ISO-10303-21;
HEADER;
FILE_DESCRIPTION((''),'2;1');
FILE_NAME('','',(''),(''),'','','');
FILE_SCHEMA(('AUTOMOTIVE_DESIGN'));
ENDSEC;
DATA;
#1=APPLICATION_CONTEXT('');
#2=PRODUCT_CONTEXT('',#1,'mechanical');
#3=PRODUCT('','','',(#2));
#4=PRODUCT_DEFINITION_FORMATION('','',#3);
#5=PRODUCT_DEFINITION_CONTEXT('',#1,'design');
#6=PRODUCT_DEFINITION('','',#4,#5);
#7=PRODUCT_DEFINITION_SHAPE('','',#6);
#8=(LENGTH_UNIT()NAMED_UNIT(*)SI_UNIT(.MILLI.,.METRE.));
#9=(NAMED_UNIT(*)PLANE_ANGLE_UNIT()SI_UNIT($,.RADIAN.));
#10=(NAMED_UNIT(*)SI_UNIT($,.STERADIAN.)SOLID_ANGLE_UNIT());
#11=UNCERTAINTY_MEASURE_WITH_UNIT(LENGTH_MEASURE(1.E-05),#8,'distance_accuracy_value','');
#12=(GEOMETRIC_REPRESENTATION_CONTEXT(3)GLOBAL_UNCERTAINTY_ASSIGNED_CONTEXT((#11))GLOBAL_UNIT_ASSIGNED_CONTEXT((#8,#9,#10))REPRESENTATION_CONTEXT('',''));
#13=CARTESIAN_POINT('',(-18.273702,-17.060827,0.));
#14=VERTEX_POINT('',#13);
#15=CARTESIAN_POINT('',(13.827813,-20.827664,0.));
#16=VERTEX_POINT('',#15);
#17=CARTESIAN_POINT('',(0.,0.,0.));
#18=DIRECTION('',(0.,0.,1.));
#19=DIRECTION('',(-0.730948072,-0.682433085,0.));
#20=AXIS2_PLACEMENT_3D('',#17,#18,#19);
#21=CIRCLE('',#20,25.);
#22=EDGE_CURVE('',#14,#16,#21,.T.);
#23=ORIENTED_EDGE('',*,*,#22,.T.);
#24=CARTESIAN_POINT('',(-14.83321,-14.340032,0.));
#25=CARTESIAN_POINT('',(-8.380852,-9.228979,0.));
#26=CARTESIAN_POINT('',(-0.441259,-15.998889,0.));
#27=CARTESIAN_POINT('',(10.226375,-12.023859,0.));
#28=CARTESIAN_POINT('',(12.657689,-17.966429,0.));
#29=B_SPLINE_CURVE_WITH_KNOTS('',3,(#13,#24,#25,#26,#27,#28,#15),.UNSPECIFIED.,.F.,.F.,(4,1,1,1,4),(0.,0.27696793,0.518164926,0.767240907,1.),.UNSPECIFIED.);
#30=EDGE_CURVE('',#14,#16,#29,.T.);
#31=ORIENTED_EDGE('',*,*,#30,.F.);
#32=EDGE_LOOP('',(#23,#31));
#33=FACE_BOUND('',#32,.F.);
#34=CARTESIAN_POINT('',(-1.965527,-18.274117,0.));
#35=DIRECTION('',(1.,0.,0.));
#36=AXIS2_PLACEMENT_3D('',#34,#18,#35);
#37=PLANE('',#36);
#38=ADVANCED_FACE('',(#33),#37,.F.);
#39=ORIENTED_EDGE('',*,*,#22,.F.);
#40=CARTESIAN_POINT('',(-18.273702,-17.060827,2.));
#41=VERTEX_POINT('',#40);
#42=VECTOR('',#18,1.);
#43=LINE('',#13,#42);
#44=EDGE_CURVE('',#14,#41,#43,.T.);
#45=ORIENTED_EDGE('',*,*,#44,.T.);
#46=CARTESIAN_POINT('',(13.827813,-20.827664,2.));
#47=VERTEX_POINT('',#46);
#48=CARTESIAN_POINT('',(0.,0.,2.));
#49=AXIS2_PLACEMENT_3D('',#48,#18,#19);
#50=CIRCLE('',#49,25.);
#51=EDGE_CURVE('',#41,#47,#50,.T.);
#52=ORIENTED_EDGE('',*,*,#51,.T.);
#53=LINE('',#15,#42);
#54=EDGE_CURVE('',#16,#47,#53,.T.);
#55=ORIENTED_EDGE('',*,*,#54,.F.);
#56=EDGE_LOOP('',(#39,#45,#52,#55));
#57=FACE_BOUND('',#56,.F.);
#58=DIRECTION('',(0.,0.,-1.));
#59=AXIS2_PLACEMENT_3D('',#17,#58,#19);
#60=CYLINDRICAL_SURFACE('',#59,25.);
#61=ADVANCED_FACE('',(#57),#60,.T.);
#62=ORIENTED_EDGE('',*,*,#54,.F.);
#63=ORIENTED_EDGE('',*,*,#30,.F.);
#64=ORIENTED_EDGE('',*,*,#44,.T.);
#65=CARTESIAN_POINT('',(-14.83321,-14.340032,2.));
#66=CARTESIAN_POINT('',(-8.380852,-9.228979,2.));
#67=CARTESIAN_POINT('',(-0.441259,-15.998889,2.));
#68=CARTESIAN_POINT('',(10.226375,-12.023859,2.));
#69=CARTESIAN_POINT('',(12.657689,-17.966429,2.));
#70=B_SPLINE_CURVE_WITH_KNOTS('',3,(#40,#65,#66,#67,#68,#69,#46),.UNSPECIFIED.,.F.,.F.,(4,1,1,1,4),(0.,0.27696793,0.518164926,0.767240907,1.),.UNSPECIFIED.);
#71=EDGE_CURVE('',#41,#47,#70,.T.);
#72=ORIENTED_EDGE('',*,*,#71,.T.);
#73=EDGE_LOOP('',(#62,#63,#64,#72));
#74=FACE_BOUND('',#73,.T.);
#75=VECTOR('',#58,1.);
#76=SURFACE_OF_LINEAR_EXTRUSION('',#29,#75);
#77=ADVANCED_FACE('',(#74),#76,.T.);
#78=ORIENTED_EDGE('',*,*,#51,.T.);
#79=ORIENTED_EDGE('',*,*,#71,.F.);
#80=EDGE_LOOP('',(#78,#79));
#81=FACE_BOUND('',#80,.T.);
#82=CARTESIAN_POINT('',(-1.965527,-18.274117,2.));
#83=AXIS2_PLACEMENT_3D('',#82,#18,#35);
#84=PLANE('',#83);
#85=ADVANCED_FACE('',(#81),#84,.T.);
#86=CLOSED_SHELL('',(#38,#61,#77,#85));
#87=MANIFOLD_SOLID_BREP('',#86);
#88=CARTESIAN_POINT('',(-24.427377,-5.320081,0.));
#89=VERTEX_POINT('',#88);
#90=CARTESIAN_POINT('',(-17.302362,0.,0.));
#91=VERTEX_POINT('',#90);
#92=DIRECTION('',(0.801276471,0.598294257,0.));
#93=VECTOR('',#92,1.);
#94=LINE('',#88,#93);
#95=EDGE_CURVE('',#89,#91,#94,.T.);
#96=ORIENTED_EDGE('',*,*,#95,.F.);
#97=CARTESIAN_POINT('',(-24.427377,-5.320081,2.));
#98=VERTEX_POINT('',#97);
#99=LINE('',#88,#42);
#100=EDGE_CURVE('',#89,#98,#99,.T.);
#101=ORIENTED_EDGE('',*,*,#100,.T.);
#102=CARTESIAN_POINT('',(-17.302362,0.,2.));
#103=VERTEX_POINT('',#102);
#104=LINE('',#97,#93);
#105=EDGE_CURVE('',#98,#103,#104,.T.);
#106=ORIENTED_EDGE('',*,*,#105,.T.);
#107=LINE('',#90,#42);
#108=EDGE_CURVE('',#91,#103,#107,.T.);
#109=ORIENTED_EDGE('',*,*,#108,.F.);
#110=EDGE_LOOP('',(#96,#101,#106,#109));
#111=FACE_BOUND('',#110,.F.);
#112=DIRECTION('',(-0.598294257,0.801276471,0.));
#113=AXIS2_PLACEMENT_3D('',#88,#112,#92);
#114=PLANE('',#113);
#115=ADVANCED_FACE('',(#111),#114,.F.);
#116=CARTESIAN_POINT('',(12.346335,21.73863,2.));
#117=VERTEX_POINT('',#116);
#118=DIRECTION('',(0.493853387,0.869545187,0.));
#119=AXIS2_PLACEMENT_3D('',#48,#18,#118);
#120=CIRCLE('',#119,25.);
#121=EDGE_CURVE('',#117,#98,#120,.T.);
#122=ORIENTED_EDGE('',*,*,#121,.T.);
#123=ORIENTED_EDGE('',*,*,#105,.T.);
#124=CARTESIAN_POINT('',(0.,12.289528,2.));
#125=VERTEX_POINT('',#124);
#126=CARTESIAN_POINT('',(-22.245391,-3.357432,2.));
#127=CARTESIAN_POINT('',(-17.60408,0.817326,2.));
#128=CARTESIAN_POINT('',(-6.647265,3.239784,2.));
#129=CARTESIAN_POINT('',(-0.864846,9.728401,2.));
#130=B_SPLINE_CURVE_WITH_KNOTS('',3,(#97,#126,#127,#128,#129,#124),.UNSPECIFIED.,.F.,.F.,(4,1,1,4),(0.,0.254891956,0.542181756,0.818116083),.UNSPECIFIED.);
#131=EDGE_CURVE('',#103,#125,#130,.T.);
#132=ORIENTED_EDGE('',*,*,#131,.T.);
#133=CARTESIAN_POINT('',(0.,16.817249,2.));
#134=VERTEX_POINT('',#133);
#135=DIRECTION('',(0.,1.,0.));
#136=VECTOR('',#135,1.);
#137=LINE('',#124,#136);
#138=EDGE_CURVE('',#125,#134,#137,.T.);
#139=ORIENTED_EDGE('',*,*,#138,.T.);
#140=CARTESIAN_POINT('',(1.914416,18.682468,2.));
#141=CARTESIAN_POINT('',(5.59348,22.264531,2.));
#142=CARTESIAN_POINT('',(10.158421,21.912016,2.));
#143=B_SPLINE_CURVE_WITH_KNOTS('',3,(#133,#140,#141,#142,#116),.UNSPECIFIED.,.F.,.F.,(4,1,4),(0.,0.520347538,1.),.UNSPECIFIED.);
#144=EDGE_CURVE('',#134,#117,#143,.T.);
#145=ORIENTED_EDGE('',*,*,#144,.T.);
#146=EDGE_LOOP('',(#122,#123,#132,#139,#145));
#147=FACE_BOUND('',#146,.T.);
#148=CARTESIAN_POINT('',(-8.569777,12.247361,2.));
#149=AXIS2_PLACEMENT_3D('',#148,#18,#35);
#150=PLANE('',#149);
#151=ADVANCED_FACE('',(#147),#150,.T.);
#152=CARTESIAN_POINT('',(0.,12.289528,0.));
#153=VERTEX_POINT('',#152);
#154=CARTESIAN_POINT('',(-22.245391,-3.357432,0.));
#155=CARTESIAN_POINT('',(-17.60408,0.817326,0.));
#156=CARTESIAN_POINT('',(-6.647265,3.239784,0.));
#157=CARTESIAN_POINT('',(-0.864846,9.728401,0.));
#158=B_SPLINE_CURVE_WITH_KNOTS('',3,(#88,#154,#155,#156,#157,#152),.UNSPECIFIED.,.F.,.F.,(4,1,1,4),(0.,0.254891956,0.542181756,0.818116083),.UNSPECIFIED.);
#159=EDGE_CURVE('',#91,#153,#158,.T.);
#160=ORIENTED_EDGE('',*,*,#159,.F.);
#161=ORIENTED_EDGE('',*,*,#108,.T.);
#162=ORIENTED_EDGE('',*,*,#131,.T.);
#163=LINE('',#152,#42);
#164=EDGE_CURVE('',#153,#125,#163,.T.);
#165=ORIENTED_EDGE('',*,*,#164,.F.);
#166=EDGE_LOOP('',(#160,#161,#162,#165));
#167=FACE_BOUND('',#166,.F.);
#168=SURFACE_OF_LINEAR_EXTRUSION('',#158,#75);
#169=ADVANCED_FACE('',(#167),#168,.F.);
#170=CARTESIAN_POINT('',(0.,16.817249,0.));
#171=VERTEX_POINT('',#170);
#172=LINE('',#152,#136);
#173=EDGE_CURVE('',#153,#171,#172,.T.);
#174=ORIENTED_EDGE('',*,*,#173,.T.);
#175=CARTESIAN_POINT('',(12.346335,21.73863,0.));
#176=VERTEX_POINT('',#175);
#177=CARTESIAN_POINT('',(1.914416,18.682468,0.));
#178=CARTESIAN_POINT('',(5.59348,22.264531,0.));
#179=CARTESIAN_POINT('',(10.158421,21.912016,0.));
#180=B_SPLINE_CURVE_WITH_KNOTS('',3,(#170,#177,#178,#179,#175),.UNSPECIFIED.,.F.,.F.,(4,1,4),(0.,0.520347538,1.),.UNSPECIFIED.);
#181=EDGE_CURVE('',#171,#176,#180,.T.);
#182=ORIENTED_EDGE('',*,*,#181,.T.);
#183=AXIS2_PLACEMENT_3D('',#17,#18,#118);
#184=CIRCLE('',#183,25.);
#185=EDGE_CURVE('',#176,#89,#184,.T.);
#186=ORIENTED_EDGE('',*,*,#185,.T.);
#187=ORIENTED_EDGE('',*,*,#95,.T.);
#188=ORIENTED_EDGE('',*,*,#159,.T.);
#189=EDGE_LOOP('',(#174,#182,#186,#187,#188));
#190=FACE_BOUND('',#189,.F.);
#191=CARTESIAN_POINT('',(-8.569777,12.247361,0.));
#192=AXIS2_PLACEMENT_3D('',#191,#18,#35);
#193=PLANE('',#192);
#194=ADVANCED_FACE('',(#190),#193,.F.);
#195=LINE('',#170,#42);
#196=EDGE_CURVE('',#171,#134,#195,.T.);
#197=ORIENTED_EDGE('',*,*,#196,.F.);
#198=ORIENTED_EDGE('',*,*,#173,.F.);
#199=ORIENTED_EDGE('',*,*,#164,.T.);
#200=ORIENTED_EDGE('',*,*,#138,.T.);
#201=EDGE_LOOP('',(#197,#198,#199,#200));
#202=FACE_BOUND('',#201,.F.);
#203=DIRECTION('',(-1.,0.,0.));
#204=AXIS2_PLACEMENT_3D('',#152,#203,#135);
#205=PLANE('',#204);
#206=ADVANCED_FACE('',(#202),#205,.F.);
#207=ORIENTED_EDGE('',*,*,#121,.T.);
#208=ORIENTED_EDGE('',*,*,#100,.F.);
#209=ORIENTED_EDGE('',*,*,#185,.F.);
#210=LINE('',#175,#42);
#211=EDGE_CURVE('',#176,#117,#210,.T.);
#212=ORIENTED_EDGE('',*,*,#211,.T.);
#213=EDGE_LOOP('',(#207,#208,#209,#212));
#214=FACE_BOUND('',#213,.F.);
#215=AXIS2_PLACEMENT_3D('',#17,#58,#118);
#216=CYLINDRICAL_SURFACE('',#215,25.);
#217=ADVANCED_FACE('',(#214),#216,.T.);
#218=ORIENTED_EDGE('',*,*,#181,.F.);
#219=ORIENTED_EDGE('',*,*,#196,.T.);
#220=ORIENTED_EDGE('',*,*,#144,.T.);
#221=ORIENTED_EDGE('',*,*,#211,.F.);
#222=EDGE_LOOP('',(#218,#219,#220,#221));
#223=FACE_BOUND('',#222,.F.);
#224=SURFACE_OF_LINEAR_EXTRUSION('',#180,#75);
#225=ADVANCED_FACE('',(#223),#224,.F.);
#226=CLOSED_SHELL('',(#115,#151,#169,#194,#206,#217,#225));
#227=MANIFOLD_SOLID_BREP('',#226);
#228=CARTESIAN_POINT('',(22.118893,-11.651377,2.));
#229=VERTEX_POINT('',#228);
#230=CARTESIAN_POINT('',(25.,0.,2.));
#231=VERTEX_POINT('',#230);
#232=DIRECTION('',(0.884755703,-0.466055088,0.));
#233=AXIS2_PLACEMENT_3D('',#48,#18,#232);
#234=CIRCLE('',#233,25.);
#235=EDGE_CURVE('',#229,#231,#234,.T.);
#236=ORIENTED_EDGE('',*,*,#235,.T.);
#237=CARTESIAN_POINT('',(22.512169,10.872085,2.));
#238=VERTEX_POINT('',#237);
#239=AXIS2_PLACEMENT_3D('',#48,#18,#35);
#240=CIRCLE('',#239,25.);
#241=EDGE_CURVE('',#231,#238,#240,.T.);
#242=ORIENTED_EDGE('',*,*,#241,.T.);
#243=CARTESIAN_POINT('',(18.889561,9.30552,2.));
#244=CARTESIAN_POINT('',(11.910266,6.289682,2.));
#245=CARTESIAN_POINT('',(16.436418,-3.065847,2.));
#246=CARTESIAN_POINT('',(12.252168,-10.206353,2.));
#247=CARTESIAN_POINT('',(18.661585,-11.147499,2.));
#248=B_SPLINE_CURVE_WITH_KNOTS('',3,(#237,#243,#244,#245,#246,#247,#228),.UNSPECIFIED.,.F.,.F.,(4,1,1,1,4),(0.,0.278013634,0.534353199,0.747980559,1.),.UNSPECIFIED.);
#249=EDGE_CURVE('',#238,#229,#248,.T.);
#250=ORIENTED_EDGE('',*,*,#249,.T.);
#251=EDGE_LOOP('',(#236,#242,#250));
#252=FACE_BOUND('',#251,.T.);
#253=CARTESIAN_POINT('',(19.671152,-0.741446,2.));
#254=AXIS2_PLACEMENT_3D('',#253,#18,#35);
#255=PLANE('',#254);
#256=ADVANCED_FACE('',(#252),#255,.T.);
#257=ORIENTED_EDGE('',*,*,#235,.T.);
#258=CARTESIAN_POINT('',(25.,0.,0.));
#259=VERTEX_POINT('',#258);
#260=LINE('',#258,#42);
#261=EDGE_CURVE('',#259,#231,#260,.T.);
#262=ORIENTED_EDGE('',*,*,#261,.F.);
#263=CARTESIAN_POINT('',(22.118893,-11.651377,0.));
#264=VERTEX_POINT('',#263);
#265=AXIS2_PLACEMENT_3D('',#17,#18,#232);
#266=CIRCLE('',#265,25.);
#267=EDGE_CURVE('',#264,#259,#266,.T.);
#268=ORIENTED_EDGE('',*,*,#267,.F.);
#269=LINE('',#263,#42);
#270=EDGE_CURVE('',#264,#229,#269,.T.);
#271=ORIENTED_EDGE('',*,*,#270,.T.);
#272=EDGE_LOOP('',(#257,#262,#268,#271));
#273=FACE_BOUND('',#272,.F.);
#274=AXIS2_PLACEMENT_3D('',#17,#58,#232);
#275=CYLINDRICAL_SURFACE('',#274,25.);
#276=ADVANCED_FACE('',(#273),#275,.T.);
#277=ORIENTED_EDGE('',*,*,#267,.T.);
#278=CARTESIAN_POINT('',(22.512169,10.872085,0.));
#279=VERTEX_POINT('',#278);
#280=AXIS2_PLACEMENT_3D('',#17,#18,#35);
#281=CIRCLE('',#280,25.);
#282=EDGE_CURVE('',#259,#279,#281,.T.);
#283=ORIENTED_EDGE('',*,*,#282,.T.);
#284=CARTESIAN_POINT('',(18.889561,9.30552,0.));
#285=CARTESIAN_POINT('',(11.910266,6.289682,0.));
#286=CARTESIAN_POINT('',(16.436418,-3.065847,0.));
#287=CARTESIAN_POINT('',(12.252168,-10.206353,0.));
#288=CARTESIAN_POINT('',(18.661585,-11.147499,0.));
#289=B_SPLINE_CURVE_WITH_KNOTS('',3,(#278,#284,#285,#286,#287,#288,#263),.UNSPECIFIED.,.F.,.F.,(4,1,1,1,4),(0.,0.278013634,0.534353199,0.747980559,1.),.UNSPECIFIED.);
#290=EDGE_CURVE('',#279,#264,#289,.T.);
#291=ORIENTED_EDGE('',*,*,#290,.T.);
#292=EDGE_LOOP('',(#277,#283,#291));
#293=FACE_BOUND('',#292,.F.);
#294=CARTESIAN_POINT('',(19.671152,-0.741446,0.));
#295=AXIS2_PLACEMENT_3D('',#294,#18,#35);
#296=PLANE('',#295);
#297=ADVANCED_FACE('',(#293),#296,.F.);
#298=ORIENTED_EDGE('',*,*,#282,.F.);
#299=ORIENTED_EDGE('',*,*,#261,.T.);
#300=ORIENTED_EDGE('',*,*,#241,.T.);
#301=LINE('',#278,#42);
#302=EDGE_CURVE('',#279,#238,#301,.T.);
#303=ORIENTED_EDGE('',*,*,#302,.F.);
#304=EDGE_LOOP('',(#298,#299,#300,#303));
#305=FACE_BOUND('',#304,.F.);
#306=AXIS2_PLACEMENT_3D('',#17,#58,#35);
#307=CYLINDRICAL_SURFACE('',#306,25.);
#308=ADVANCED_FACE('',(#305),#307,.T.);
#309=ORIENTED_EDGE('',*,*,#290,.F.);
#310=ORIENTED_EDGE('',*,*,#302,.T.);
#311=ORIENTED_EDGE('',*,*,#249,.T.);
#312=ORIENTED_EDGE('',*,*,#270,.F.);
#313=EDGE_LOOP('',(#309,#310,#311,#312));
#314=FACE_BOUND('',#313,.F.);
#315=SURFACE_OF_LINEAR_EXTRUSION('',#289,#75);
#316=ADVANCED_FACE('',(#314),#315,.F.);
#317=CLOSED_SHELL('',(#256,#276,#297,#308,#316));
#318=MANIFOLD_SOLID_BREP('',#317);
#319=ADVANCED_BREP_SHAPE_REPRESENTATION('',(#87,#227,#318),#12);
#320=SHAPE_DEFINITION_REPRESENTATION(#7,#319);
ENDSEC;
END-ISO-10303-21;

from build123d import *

# Parameters (mm, degrees)
F1_DEPTH = 2


with BuildPart() as f1:
    # F0 (on Top) → F1 (new body)
    with BuildSketch(Plane.XY):
        with BuildLine():
            ThreePointArc((22.1188925873, -11.6513772023), (24.2690370089, -6.001153444), (25, 0))
            ThreePointArc((25, 0), (24.3701069704, 5.5765478793), (22.5121691, 10.8720854676))
            add(Edge.make_bspline(
                [(22.5121691, 10.8720854676), (18.8895611428, 9.3055197167), (11.9102659407, 6.2896821538), (16.4364178682, -3.0658471403), (12.2521680449, -10.2063529762), (18.6615851191, -11.1474987265), (22.1188925873, -11.6513772023)],
                knots=[0, 0, 0, 0, 0.2780136343, 0.5343531988, 0.7479805585, 1, 1, 1, 1], degree=3))
        make_face()
    extrude(amount=F1_DEPTH)


with BuildPart() as f1b:
    # F0 (on Top) → F1, piece 2 (new body)
    with BuildSketch(Plane.XY):
        with BuildLine():
            add(Edge.make_bspline(
                [(0, 16.8172493577), (1.9144161531, 18.6824676113), (5.5934798745, 22.2645311542), (10.1584208321, 21.9120162799), (12.34633467, 21.7386296766)],
                knots=[0, 0, 0, 0, 0.5203475383, 1, 1, 1, 1], degree=3))
            ThreePointArc((12.34633467, 21.7386296766), (-14.8165901958, 20.1362522573), (-24.4273769181, -5.3200805351))
            add(Edge.make_bspline(
                [(-24.4273769181, -5.3200805351), (-22.2453911763, -3.3574319676), (-20.0634054345, -1.3947834001), (-17.3023622483, 0)],
                knots=[0, 0, 0, 0, 0.254891956, 0.254891956, 0.254891956, 0.254891956], degree=3))
            add(Edge.make_bspline(
                [(-17.3023622483, 0), (-14.1903788127, 1.5720662607), (-6.6472654424, 3.2397841474), (-0.8648455283, 9.7284013886), (0, 12.2895278037)],
                knots=[0.254891956, 0.254891956, 0.254891956, 0.254891956, 0.542181756, 0.8181160828, 0.8181160828, 0.8181160828, 0.8181160828], degree=3))
            Line((0, 12.2895278037), (0, 16.8172493577))
        make_face()
        with BuildLine():
            add(Edge.make_bspline(
                [(-24.4273769181, -5.3200805351), (-22.2453911763, -3.3574319676), (-20.0634054345, -1.3947834001), (-17.3023622483, 0)],
                knots=[0, 0, 0, 0, 0.254891956, 0.254891956, 0.254891956, 0.254891956], degree=3))
            Line((-24.4273769181, -5.3200805351), (-17.3023622483, 0))
        make_face()
    extrude(amount=F1_DEPTH)


with BuildPart() as f1c:
    # F0 (on Top) → F1, piece 3 (new body)
    with BuildSketch(Plane.XY):
        with BuildLine():
            ThreePointArc((-18.2737018092, -17.0608271249), (-2.9135456355, -24.8296446175), (13.8278126154, -20.8276642539))
            add(Edge.make_bspline(
                [(-18.2737018092, -17.0608271249), (-14.8332101277, -14.3400323801), (-8.3808524987, -9.228978734), (-0.4412585546, -15.998889193), (10.2263751779, -12.0238586347), (12.6576888155, -17.9664290501), (13.8278126154, -20.8276642539)],
                knots=[0, 0, 0, 0, 0.2769679297, 0.5181649262, 0.767240907, 1, 1, 1, 1], degree=3))
        make_face()
    extrude(amount=F1_DEPTH)


solid = Compound([f1.part, f1b.part, f1c.part])
